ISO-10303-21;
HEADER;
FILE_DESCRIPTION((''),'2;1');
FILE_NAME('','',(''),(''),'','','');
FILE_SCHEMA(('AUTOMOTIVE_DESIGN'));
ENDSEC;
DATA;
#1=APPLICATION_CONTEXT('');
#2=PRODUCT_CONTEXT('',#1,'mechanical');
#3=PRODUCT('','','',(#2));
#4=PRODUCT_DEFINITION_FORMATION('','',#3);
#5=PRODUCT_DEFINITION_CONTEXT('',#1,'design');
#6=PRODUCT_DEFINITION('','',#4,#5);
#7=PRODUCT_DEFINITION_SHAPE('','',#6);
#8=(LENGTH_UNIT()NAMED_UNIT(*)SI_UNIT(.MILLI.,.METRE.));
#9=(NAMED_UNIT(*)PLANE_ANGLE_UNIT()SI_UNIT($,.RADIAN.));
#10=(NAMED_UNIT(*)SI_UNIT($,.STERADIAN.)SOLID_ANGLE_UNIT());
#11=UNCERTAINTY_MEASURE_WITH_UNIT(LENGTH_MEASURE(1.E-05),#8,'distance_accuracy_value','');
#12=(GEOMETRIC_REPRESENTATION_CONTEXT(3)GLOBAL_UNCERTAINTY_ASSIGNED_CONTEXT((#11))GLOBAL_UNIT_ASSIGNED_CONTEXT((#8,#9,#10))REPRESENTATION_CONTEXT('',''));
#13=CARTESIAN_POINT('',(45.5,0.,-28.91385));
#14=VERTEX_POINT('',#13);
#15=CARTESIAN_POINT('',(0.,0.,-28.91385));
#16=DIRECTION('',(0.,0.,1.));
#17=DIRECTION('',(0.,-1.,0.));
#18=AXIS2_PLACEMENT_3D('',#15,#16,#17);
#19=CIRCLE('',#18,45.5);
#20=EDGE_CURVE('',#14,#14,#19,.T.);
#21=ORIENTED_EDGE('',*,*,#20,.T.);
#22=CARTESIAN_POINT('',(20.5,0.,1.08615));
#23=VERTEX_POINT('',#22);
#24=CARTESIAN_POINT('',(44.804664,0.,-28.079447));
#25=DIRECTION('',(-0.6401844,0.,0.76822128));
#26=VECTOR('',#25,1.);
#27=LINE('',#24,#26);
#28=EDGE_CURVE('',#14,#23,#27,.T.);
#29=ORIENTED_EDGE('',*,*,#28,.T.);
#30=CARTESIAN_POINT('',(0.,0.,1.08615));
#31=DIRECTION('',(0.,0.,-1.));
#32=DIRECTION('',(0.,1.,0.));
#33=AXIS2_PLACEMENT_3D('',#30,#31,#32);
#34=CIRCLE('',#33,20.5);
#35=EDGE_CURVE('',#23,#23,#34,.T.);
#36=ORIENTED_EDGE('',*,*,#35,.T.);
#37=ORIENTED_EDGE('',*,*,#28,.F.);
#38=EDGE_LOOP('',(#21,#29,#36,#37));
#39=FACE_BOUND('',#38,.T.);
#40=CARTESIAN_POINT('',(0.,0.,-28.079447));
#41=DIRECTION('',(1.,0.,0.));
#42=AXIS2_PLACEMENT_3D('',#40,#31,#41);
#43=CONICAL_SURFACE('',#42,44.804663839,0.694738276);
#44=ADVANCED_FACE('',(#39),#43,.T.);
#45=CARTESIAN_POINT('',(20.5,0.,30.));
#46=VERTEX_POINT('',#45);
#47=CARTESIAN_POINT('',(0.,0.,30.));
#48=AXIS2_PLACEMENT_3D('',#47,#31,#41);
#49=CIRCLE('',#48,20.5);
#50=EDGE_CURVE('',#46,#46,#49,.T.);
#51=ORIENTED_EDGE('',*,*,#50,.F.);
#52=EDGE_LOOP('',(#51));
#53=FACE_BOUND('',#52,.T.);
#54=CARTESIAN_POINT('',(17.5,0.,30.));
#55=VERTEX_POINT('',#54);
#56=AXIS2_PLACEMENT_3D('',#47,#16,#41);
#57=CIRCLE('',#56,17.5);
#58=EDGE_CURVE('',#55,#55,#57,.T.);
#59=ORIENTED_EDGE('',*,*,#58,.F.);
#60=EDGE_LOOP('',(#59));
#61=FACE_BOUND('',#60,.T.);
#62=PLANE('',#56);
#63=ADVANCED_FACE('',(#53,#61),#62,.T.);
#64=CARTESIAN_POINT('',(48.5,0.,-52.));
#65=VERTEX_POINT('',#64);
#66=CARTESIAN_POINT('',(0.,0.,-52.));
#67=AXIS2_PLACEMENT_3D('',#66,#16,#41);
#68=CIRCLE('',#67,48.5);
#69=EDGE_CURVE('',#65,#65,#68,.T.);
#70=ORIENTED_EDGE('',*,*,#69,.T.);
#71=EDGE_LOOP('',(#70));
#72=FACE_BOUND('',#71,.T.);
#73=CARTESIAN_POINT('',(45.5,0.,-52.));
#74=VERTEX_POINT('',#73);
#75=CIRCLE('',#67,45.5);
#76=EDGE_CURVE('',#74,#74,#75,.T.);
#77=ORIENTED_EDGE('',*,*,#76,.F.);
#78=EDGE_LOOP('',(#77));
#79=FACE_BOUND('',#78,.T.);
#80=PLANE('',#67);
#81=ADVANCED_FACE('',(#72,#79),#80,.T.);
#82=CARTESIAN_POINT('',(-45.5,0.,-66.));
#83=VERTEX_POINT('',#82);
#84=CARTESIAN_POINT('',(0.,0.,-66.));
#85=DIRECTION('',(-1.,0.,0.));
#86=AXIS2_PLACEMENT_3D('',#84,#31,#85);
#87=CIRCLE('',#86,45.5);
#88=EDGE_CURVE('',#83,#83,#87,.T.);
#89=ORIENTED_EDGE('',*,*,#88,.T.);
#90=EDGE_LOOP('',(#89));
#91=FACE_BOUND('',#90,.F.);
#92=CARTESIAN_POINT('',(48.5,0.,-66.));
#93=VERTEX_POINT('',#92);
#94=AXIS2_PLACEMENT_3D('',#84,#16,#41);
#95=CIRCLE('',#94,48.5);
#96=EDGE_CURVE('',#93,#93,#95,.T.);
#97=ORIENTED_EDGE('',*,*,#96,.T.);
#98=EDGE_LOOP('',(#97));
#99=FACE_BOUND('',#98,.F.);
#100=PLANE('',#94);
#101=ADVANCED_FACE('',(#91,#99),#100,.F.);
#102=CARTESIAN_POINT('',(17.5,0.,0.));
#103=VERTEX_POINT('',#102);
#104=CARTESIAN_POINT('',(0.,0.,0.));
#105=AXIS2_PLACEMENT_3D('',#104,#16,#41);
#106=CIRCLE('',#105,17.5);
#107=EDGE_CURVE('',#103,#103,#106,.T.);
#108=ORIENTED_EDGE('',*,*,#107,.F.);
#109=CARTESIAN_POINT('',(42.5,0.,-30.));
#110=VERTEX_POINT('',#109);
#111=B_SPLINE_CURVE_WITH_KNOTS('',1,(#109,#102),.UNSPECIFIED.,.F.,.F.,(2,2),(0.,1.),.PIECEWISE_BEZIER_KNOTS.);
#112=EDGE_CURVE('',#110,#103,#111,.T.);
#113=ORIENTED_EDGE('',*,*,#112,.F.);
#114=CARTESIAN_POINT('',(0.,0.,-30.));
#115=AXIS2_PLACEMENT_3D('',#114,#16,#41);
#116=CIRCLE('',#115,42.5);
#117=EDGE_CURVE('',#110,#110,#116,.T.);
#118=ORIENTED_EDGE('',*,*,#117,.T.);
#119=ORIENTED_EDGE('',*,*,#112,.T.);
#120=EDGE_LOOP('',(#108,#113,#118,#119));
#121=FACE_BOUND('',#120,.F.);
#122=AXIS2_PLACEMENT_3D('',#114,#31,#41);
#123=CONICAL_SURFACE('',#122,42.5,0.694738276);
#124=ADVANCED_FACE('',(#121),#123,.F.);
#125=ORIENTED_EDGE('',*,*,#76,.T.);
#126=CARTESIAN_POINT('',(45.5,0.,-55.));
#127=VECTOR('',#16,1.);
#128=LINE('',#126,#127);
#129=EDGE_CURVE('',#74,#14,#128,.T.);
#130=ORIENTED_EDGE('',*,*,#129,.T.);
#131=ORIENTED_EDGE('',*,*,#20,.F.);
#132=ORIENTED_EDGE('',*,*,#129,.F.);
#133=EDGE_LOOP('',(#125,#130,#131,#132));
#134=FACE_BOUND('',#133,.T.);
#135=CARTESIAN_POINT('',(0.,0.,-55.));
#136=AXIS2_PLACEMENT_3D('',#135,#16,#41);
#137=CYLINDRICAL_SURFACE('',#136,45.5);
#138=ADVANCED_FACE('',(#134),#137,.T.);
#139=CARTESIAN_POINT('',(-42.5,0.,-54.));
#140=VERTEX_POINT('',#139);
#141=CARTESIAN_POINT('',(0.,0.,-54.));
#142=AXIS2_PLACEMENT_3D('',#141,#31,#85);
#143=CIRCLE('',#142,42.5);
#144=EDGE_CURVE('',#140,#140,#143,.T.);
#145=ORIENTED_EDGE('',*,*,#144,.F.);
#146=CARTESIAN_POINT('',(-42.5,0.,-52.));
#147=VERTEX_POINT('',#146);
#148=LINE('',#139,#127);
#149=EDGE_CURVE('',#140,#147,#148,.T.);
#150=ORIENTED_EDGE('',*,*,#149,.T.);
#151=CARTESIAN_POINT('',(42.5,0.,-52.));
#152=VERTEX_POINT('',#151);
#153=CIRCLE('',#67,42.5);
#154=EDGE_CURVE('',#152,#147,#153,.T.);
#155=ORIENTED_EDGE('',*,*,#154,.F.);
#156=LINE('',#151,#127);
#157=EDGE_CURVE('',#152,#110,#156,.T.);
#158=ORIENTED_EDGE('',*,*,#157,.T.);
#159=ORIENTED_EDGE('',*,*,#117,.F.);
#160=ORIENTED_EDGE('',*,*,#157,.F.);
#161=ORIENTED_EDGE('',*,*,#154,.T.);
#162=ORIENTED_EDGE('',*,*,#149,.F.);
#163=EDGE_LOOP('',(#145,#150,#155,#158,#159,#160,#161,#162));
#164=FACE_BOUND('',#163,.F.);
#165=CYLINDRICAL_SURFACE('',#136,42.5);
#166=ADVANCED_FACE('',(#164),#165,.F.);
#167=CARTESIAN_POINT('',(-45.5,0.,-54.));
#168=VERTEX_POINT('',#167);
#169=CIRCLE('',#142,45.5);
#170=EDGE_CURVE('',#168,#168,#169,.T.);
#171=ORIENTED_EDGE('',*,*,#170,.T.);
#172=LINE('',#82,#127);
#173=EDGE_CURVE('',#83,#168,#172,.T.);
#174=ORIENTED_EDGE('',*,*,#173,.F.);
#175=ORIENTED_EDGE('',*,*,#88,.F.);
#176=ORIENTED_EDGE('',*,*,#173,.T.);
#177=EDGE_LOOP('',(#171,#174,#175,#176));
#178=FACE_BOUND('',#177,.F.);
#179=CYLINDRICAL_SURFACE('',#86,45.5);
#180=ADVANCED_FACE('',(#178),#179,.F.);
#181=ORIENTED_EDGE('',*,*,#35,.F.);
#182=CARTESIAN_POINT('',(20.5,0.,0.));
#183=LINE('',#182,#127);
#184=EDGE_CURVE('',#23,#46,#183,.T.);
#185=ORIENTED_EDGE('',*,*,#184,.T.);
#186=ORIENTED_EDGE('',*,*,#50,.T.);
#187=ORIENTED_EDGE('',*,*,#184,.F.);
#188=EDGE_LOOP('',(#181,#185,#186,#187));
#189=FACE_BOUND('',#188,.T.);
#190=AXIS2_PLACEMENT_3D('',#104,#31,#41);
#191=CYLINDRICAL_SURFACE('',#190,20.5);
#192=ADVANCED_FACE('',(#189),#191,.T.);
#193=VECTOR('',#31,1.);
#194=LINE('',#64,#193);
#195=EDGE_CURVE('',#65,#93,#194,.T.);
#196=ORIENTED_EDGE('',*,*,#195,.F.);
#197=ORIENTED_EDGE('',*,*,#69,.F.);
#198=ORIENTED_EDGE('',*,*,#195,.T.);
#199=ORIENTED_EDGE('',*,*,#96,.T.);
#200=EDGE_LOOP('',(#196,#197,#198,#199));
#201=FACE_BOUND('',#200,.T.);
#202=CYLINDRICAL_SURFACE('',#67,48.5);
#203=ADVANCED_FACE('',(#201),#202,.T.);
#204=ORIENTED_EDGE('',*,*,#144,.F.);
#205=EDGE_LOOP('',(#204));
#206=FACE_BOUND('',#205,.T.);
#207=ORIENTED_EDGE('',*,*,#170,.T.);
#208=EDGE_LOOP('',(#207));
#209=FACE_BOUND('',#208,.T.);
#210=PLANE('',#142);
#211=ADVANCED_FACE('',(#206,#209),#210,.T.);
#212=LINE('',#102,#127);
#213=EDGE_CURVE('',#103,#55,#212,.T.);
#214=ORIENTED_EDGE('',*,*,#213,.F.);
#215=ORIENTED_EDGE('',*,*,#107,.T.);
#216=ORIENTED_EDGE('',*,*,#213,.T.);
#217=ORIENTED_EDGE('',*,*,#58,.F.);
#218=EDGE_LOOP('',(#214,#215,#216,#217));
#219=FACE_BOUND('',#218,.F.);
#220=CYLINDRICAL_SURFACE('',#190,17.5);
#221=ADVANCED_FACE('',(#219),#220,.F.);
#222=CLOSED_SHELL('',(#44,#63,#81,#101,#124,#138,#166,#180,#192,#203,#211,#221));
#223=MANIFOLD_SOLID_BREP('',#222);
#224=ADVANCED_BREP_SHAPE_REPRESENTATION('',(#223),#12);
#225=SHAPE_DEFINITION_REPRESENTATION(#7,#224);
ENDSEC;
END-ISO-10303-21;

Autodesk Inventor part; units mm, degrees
ref_plane "YZ Plane" through (0, 0, 0) normal (1, 0, 0) x (0, 1, 0)
ref_plane "XZ Plane" through (0, 0, 0) normal (0, 1, 0) x (-1, 0, 0)
sketch "Boceto1" plane through (0, 0, 0) normal (0, 0, 1) x (1, 0, 0)
  arc A0 (11.6645, -103.4622) -> (0, -112.3475) centre (12.4952, -116.6519) ccw construction
  line L0 (-152.4797, 0) -> (132.3175, 0) construction
  line L1 (0, 89.2085) -> (0, -112.3475) construction
  circle A1 centre (0, 0) radius 17.5
  dimension "d0" = 35
extrude "Extrusión1" add sketch "Boceto1" along normal blind 30
ref_plane "Plano de trabajo1" through (0, 0, -30) normal (0, 0, 1) x (1, 0, 0)
sketch "Boceto2" plane through (0, 0, -30) normal (0, 0, 1) x (1, 0, 0)
  circle A0 centre (0, 0) radius 42.5
  dimension "d4" = 85
loft "Solevación1" add profiles "Boceto2" section 2 edges at (-17.5, 0, 0)
ref_plane "Plano de trabajo2" through (0, 0, -55) normal (0, 0, 1) x (1, 0, 0)
sketch "Boceto3" plane through (0, 0, -55) normal (0, 0, 1) x (1, 0, 0)
  circle A0 centre (0, 0) radius 42.5
  dimension "d10" = 85
loft "Solevación2" add profiles "Boceto3" section 2 edges at (-42.5, 0, -30)
shell "Vaciado1" thickness 3 outward yes removed faces 2 at (-10.6049, 7.3037, -55) at (4.865, -5.1831, 30)
ref_plane "Plano de trabajo3" through (0, 0, -52) normal (0, 0, 1) x (1, 0, 0)
sketch "Boceto4" plane through (0, 0, -52) normal (0, 0, 1) x (1, 0, 0)
  circle A0 centre (0, 0) radius 48.5
  dimension "d17" = 97
extrude "Extrusión2" add sketch "Boceto4" against normal blind 14
sketch "Boceto5" plane through (0, 0, -66) normal (0, 0, -1) x (-1, 0, 0)
  circle A0 centre (0, 0) radius 45.5
  dimension "d20" = 91
extrude "Extrusión3" cut sketch "Boceto5" against normal blind 12
sketch "Boceto6" plane through (0, 0, -54) normal (0, 0, -1) x (-1, 0, 0)
  circle A0 centre (0, 0) radius 42.5
  dimension "d23" = 85
extrude "Extrusión4" cut sketch "Boceto6" against normal blind 12
sketch "Boceto7" plane through (0, 0, 30) normal (0, 0, 1) x (1, 0, 0)
  point P0 (0, 0)
properties part number "CAPSULA 2DA MITAD"
